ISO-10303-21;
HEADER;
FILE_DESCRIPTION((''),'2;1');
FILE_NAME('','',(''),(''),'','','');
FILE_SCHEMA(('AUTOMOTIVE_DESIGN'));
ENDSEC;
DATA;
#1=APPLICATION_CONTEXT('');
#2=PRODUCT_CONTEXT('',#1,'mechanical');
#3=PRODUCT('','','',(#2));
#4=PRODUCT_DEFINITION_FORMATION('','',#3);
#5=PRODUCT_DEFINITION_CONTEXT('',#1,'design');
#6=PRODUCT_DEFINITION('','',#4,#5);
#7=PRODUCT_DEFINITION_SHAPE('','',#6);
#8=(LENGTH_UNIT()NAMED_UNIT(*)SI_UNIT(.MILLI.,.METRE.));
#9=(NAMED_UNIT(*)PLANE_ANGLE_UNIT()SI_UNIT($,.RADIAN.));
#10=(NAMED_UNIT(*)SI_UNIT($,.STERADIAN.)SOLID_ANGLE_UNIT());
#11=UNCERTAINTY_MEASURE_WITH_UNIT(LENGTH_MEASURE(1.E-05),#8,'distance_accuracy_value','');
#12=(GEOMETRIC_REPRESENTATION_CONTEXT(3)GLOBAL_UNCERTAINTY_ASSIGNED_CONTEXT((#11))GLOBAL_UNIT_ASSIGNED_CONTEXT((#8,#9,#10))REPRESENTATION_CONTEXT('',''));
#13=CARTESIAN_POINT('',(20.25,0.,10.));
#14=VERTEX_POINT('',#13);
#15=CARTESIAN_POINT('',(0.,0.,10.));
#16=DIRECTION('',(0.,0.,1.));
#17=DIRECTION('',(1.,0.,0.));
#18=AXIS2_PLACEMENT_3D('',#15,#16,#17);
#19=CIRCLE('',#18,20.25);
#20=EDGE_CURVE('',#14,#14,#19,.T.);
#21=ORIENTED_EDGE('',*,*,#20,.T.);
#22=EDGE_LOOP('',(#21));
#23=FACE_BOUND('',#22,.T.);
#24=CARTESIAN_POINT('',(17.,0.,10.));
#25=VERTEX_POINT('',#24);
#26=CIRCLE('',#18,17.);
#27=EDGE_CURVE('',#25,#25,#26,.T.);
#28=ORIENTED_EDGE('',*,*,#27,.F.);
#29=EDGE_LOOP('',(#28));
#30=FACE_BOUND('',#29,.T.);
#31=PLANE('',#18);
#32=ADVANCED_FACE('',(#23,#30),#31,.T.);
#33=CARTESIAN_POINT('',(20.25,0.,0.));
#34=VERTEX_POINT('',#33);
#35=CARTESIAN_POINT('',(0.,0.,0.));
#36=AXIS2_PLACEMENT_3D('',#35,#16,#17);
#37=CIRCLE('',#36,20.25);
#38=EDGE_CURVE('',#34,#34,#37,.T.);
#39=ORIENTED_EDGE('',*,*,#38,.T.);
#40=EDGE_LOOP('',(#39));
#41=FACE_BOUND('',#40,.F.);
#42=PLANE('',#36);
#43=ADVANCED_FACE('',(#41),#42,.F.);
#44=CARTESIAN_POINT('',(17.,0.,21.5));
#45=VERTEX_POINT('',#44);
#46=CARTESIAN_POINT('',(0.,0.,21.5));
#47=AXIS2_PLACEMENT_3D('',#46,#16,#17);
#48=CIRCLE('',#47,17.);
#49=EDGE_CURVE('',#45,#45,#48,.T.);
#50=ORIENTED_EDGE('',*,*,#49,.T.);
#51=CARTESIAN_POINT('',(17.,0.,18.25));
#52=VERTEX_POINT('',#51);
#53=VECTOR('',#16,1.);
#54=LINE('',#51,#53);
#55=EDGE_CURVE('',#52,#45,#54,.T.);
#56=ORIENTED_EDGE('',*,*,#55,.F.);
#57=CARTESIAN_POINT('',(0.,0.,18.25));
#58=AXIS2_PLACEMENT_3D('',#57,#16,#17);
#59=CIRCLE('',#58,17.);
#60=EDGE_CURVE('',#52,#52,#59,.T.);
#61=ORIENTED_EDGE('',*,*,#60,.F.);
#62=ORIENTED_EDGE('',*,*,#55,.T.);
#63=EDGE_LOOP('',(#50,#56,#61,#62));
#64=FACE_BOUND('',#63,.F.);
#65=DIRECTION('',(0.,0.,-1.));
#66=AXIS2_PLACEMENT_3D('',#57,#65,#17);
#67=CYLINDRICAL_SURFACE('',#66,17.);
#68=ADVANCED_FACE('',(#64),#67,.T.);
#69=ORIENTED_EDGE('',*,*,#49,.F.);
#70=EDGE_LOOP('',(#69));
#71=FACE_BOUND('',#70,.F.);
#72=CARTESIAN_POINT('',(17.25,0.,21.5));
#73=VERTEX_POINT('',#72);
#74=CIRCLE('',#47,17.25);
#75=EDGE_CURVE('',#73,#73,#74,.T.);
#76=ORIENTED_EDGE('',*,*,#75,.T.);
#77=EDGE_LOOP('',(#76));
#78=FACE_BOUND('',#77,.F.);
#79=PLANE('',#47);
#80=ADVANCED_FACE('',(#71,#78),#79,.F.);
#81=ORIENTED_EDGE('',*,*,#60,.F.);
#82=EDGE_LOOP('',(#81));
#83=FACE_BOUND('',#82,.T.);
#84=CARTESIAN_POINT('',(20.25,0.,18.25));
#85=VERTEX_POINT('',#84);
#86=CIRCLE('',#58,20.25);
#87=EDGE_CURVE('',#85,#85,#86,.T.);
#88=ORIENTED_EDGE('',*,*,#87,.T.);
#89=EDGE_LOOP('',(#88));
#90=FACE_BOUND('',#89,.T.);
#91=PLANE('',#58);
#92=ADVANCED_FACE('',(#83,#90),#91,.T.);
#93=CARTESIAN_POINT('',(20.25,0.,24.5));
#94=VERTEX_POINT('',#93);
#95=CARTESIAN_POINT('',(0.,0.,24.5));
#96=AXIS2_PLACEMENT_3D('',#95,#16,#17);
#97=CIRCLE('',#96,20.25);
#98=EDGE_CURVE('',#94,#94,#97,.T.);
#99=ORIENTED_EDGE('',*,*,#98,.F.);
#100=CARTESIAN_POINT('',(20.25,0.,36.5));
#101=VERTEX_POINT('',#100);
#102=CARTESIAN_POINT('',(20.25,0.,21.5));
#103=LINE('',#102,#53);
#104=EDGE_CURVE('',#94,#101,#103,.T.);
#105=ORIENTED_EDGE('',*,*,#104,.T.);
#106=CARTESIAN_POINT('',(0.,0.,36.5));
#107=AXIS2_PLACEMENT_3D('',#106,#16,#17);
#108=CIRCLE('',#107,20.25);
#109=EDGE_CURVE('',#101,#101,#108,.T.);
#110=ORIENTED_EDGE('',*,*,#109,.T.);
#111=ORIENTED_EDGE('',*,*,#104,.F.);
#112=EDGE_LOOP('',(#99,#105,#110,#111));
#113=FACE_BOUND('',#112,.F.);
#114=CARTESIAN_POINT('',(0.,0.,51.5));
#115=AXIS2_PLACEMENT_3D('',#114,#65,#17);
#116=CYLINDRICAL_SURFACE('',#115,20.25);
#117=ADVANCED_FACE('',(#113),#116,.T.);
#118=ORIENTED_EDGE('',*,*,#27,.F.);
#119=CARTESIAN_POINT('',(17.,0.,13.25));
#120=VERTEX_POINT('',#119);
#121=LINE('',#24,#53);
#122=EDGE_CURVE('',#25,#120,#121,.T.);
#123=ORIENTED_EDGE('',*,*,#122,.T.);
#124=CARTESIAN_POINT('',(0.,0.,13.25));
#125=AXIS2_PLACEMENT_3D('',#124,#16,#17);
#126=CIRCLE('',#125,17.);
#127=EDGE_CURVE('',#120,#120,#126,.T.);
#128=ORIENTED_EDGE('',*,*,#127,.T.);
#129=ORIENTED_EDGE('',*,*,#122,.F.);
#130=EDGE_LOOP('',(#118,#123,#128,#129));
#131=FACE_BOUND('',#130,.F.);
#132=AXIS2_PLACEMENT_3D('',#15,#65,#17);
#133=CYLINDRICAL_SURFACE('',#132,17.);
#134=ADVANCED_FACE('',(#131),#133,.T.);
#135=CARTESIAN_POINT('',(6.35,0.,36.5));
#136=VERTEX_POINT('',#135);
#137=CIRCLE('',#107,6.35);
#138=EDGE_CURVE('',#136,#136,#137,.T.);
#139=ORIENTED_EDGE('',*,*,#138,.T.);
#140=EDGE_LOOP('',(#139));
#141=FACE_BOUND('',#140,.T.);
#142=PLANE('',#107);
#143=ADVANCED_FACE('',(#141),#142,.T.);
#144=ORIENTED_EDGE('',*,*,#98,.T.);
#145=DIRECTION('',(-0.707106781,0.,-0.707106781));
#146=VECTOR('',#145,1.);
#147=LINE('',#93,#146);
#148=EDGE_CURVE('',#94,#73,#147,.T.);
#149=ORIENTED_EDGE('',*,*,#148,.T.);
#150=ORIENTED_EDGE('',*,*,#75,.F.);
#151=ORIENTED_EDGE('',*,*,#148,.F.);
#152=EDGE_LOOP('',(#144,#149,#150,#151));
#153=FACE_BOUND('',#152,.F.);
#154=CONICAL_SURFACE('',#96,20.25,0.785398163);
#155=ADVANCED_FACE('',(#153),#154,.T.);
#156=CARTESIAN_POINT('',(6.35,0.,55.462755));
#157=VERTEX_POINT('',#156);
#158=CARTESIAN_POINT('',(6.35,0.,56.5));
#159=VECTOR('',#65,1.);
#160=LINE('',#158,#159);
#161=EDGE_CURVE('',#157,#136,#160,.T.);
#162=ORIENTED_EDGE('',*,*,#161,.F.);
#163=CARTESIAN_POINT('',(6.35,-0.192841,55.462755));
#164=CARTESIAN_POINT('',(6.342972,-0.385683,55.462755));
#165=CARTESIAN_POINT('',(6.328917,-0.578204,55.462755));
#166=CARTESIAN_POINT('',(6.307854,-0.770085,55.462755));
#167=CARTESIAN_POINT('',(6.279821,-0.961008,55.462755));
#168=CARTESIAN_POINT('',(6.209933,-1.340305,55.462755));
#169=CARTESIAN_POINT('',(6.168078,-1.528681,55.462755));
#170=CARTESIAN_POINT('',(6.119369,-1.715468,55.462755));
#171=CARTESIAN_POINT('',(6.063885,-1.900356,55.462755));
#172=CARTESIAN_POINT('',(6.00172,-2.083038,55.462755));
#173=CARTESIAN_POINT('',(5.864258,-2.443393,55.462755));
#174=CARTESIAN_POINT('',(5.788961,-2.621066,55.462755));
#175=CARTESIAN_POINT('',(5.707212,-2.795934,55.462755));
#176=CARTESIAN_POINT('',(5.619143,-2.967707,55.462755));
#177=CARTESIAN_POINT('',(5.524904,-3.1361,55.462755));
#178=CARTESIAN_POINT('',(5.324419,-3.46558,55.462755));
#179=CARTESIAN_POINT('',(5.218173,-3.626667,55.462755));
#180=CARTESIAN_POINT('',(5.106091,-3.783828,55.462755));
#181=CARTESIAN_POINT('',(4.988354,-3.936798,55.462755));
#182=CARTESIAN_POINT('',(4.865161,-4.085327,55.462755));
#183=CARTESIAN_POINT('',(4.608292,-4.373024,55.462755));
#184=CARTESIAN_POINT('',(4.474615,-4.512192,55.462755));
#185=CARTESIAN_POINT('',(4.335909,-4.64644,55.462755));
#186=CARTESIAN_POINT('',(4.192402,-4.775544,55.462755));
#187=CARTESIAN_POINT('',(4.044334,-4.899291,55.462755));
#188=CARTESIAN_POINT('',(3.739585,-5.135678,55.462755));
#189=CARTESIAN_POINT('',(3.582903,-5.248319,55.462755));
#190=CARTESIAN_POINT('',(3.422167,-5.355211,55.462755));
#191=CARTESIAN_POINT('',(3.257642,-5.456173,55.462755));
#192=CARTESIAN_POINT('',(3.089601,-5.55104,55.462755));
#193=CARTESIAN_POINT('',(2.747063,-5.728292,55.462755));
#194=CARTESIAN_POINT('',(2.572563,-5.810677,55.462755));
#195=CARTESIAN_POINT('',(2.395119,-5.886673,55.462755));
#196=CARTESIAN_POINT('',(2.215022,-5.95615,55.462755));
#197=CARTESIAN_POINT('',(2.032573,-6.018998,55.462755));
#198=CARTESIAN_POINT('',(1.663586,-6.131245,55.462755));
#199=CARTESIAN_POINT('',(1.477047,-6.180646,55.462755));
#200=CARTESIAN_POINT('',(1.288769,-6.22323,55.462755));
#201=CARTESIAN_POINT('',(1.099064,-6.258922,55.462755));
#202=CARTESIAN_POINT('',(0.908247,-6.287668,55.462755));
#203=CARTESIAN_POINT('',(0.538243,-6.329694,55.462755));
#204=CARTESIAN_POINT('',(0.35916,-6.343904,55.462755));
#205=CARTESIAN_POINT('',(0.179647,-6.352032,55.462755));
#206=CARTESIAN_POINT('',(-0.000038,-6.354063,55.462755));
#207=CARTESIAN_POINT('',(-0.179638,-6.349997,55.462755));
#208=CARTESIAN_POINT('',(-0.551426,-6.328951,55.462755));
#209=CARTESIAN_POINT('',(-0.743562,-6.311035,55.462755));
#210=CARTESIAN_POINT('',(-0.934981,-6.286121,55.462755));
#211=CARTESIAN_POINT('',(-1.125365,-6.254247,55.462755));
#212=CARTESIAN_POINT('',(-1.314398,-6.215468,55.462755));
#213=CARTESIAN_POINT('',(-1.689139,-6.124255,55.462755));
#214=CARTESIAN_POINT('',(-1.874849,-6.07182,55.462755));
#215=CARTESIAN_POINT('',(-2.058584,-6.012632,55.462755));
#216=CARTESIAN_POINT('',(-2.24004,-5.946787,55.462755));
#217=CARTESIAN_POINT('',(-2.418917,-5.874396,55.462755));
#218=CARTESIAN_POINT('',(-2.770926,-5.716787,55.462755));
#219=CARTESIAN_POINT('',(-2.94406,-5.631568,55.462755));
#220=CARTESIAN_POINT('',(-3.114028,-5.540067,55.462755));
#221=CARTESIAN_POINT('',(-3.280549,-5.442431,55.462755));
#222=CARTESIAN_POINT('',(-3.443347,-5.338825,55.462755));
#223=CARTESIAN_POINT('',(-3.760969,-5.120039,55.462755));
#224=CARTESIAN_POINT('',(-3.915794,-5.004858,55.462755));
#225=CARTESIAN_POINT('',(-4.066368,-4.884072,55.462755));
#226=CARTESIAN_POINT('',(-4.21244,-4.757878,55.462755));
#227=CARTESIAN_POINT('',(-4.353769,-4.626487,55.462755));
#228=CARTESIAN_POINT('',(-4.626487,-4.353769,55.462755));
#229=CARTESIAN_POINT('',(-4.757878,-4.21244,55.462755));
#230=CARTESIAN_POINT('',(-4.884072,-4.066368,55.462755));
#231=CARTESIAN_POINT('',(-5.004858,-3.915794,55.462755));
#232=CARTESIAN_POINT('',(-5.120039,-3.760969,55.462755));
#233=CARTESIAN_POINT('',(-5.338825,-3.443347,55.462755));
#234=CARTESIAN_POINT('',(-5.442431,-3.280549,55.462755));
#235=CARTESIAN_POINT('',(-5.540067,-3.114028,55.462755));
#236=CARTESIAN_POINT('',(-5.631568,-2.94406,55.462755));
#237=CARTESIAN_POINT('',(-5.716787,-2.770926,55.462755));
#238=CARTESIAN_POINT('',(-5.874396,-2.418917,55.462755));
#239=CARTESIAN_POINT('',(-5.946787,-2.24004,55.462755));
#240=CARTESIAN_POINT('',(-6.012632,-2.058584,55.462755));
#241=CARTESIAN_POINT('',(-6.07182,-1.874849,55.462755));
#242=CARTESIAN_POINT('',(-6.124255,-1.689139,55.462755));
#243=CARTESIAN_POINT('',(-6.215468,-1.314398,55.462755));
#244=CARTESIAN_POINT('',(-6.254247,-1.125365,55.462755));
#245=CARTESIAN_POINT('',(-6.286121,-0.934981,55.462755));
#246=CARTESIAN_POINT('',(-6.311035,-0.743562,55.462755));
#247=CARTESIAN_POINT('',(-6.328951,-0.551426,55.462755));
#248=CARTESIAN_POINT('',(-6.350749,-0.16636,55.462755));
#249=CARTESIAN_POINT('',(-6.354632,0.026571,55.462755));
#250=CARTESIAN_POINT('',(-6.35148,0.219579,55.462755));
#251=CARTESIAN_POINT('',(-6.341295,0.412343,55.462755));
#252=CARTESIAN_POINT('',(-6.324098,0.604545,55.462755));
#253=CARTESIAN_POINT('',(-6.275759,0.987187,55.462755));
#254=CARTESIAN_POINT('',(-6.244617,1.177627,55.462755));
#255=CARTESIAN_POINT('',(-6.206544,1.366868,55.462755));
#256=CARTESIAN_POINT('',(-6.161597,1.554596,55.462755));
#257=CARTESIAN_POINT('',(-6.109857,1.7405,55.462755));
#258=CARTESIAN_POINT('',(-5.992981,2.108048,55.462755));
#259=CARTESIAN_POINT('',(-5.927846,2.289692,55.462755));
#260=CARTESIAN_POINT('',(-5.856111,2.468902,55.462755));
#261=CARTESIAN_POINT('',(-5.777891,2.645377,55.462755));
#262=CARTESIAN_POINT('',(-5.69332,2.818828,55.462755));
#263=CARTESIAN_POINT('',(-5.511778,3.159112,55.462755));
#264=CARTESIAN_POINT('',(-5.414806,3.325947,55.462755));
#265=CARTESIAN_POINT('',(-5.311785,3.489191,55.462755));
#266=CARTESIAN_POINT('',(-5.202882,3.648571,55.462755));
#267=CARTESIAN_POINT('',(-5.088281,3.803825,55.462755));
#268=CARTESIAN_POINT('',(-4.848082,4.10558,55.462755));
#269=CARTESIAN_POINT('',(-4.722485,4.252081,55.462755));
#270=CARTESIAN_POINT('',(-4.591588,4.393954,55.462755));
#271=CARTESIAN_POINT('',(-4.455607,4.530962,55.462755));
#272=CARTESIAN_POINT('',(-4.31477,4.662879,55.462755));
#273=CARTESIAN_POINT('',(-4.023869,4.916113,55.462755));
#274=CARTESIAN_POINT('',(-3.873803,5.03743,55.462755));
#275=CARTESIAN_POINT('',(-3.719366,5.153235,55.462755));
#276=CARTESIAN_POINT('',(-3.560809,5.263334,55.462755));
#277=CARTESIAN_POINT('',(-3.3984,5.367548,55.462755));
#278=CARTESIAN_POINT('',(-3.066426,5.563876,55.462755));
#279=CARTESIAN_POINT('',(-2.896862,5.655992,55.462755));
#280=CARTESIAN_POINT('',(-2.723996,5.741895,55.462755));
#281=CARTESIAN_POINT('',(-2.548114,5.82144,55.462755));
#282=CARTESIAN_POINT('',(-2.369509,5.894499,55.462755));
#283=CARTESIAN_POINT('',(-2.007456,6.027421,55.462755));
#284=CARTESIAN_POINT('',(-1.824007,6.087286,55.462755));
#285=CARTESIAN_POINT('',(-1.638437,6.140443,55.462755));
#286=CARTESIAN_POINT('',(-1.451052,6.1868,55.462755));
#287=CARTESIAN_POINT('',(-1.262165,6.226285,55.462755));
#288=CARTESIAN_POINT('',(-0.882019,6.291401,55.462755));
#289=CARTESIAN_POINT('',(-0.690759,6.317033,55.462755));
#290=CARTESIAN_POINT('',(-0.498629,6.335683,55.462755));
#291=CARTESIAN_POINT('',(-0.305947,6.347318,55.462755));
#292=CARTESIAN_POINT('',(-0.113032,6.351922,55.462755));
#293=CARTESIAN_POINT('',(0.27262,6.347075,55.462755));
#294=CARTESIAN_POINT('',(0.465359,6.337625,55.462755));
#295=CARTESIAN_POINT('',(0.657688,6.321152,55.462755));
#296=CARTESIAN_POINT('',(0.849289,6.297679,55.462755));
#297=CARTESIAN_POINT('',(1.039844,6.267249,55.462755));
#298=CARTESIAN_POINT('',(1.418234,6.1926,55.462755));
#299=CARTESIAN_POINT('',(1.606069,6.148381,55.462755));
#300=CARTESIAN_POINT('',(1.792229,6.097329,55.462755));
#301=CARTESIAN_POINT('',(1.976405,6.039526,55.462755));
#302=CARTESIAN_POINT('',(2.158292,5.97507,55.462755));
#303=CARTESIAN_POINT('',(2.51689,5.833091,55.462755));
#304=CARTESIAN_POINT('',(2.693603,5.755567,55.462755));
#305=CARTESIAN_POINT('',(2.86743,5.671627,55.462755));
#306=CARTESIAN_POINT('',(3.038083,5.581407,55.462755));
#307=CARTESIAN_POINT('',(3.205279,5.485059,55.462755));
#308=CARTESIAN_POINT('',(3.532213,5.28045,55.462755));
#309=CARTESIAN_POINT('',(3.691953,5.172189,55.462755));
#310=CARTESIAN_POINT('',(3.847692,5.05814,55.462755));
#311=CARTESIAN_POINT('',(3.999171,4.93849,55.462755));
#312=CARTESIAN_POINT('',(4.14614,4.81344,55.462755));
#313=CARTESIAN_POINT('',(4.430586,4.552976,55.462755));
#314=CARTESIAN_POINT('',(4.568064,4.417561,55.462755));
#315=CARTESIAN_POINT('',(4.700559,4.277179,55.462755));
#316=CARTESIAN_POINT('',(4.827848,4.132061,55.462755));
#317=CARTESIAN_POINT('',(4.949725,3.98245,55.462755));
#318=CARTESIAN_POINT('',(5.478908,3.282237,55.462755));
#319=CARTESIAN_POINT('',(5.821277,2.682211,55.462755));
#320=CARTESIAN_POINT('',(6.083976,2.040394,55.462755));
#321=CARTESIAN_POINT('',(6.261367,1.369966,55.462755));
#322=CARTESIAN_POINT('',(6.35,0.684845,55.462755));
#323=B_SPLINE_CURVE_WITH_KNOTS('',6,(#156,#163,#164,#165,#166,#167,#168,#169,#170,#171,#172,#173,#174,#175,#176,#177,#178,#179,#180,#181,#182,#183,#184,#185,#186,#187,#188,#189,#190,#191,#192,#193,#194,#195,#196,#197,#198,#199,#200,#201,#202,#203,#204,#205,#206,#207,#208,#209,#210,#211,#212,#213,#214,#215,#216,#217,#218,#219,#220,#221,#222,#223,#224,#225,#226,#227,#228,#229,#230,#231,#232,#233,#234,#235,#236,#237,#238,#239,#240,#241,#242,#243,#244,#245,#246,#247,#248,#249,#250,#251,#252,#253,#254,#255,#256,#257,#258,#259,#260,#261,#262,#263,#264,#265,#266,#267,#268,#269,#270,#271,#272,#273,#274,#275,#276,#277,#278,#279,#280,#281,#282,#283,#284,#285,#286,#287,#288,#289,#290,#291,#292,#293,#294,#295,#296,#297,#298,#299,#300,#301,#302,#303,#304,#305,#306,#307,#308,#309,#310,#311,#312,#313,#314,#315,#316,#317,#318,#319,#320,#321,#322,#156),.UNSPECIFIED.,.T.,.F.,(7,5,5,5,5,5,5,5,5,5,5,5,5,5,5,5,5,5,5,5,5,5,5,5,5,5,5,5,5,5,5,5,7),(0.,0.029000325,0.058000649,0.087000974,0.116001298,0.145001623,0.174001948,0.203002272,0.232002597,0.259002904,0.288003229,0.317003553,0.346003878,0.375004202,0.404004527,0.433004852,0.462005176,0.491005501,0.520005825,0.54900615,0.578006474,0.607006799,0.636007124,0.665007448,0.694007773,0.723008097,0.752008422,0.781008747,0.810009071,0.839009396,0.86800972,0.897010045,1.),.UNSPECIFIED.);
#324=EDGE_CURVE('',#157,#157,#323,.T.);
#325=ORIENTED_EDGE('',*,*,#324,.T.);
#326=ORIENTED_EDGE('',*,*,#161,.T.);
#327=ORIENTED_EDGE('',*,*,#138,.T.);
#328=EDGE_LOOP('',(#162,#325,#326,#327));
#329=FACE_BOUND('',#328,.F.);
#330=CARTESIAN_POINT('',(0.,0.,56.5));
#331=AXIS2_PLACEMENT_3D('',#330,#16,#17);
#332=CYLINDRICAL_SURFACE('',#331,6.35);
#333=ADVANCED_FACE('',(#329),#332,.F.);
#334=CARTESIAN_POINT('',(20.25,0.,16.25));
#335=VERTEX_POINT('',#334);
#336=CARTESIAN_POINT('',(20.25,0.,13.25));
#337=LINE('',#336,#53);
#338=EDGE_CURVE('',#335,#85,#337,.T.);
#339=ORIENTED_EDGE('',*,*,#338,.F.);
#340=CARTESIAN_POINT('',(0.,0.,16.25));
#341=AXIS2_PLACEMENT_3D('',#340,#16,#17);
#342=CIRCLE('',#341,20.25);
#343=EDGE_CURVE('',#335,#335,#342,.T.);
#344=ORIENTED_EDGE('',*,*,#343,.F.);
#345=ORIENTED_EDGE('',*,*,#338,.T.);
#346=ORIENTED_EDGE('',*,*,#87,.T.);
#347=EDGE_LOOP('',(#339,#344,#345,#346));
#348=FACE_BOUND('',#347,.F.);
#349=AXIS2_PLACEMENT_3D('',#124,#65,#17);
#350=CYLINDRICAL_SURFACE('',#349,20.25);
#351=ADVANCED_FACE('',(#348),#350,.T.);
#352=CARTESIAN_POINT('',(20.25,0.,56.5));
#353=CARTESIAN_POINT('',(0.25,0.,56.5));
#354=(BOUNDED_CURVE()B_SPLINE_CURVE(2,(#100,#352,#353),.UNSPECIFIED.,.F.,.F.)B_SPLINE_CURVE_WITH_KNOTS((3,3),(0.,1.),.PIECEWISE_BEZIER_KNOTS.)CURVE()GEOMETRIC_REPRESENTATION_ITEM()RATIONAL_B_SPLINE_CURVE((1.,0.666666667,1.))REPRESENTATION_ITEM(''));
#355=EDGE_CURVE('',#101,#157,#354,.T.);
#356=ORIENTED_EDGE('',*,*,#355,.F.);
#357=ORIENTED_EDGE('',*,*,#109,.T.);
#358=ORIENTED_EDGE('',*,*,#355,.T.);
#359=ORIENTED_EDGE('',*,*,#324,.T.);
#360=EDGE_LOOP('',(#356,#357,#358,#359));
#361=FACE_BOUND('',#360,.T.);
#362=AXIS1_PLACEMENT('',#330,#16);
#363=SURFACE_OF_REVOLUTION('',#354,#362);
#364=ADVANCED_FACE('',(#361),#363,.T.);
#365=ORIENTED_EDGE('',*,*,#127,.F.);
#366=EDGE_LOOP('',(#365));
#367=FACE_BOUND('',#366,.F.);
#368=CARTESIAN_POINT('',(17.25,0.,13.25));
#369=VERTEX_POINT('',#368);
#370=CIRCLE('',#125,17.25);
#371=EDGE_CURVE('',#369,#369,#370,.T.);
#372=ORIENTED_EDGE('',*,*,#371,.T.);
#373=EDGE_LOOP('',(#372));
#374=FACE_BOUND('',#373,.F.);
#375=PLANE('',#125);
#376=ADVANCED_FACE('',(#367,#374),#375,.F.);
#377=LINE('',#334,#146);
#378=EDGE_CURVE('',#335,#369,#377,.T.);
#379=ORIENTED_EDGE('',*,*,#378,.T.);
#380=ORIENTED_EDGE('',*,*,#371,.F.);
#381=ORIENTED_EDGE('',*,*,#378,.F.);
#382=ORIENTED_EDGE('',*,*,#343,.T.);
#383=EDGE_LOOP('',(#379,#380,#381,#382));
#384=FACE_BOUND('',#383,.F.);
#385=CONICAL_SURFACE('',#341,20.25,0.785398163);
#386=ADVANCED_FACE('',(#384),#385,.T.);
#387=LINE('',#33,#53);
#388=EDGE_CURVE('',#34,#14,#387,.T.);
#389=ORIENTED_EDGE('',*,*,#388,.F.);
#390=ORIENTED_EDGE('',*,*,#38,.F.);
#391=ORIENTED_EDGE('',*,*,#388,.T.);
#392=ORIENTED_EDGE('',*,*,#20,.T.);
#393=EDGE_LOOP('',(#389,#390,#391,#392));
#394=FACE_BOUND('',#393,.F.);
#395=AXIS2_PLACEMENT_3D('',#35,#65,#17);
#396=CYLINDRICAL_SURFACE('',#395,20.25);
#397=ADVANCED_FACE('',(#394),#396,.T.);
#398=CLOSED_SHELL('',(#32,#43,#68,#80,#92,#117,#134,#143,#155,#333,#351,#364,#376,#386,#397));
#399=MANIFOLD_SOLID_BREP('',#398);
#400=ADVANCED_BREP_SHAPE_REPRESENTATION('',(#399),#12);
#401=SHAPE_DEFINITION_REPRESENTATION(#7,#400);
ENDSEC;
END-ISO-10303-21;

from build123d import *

# Parameters (mm, degrees)
F0_R      = 20.25
F1_DEPTH  = 10
F2_R      = 17
F3_DEPTH  = 3.25
F4_R      = 20.25
F4_R_2    = 17
F5_DEPTH  = 5
F6_R      = 17
F7_DEPTH  = 3.25
F8_R      = 20.25
F8_R_2    = 17
F9_DEPTH  = 25
F10_DEPTH = 5
F11_DEPTH = 5
F13_R     = 6.35
F13_R_2   = 0.25
F14_DEPTH = 20
F15_SIZE  = 3


# Not quite as in the source:
# - a fillet or chamfer that OpenCascade refuses, or shapes differently, is made with other operations: its cross-section is extruded or revolved along the edge and cut away or added


with BuildPart() as f1:
    # F0 (on Top) → F1 (new body)
    with BuildSketch(Plane.XY):
        Circle(F0_R)
    extrude(amount=F1_DEPTH)

    # F2 (on face) → F3 (join)
    with BuildSketch(Plane.XY.offset(10)):
        Circle(F2_R)
    extrude(amount=F3_DEPTH)

    # F4 (on face) → F5 (join)
    with BuildSketch(Plane.XY.offset(13.25)):
        Circle(F4_R)
        Circle(F4_R_2, mode=Mode.SUBTRACT)
        Circle(F4_R_2)
    extrude(amount=F5_DEPTH)

    # F6 (on face) → F7 (join)
    with BuildSketch(Plane.XY.offset(18.25)):
        Circle(F6_R)
    extrude(amount=F7_DEPTH)

    # F8 (on face) → F9 (join)
    with BuildSketch(Plane.XY.offset(21.5)):
        Circle(F8_R)
        Circle(F8_R_2, mode=Mode.SUBTRACT)
        Circle(F8_R_2)
    extrude(amount=F9_DEPTH)

    # F10 (add): a face of the model
    f10_faces = [f1.faces().sort_by_distance(p)[0] for p in [
        (0, 0, 46.5),
    ]]
    extrude(f10_faces, amount=F10_DEPTH)

    # F11 (add): a face of the model
    f11_faces = [f1.faces().sort_by_distance(p)[0] for p in [
        (0, 0, 51.5),
    ]]
    extrude(f11_faces, amount=F11_DEPTH)

    # F12: fillet of radius 20 on 1 edges, made by hand

    # F12_s1 → F12_t2 (revolve, cut)
    with BuildSketch(Plane.XZ):
        with BuildLine():
            add(Edge.make_bspline(
                [(20.25, 36.5), (20.25, 56.5), (0.25, 56.5)],
                knots=[0, 0, 0, 1, 1, 1], degree=2, weights=[1, 0.6666666667, 1]))
            Line((0.25, 56.5), (20.25, 56.5))
            Line((20.25, 56.5), (20.25, 36.5))
        make_face()
    revolve(axis=Axis((0, 0, 56.5), (0, 0, 1)), mode=Mode.SUBTRACT)

    # F13 (on face) → F14 (cut)
    with BuildSketch(Plane.XY.offset(56.5)):
        Circle(F13_R)
        Circle(F13_R_2, mode=Mode.SUBTRACT)
        Circle(F13_R_2)
    extrude(amount=-F14_DEPTH, mode=Mode.SUBTRACT)

    # F15
    f15_edges = [f1.edges().sort_by_distance(p)[0] for p in [
        (-20.25, 0, 13.25),
        (-20.25, 0, 21.5),
    ]]
    chamfer(f15_edges, length=F15_SIZE)


solid = f1.part
